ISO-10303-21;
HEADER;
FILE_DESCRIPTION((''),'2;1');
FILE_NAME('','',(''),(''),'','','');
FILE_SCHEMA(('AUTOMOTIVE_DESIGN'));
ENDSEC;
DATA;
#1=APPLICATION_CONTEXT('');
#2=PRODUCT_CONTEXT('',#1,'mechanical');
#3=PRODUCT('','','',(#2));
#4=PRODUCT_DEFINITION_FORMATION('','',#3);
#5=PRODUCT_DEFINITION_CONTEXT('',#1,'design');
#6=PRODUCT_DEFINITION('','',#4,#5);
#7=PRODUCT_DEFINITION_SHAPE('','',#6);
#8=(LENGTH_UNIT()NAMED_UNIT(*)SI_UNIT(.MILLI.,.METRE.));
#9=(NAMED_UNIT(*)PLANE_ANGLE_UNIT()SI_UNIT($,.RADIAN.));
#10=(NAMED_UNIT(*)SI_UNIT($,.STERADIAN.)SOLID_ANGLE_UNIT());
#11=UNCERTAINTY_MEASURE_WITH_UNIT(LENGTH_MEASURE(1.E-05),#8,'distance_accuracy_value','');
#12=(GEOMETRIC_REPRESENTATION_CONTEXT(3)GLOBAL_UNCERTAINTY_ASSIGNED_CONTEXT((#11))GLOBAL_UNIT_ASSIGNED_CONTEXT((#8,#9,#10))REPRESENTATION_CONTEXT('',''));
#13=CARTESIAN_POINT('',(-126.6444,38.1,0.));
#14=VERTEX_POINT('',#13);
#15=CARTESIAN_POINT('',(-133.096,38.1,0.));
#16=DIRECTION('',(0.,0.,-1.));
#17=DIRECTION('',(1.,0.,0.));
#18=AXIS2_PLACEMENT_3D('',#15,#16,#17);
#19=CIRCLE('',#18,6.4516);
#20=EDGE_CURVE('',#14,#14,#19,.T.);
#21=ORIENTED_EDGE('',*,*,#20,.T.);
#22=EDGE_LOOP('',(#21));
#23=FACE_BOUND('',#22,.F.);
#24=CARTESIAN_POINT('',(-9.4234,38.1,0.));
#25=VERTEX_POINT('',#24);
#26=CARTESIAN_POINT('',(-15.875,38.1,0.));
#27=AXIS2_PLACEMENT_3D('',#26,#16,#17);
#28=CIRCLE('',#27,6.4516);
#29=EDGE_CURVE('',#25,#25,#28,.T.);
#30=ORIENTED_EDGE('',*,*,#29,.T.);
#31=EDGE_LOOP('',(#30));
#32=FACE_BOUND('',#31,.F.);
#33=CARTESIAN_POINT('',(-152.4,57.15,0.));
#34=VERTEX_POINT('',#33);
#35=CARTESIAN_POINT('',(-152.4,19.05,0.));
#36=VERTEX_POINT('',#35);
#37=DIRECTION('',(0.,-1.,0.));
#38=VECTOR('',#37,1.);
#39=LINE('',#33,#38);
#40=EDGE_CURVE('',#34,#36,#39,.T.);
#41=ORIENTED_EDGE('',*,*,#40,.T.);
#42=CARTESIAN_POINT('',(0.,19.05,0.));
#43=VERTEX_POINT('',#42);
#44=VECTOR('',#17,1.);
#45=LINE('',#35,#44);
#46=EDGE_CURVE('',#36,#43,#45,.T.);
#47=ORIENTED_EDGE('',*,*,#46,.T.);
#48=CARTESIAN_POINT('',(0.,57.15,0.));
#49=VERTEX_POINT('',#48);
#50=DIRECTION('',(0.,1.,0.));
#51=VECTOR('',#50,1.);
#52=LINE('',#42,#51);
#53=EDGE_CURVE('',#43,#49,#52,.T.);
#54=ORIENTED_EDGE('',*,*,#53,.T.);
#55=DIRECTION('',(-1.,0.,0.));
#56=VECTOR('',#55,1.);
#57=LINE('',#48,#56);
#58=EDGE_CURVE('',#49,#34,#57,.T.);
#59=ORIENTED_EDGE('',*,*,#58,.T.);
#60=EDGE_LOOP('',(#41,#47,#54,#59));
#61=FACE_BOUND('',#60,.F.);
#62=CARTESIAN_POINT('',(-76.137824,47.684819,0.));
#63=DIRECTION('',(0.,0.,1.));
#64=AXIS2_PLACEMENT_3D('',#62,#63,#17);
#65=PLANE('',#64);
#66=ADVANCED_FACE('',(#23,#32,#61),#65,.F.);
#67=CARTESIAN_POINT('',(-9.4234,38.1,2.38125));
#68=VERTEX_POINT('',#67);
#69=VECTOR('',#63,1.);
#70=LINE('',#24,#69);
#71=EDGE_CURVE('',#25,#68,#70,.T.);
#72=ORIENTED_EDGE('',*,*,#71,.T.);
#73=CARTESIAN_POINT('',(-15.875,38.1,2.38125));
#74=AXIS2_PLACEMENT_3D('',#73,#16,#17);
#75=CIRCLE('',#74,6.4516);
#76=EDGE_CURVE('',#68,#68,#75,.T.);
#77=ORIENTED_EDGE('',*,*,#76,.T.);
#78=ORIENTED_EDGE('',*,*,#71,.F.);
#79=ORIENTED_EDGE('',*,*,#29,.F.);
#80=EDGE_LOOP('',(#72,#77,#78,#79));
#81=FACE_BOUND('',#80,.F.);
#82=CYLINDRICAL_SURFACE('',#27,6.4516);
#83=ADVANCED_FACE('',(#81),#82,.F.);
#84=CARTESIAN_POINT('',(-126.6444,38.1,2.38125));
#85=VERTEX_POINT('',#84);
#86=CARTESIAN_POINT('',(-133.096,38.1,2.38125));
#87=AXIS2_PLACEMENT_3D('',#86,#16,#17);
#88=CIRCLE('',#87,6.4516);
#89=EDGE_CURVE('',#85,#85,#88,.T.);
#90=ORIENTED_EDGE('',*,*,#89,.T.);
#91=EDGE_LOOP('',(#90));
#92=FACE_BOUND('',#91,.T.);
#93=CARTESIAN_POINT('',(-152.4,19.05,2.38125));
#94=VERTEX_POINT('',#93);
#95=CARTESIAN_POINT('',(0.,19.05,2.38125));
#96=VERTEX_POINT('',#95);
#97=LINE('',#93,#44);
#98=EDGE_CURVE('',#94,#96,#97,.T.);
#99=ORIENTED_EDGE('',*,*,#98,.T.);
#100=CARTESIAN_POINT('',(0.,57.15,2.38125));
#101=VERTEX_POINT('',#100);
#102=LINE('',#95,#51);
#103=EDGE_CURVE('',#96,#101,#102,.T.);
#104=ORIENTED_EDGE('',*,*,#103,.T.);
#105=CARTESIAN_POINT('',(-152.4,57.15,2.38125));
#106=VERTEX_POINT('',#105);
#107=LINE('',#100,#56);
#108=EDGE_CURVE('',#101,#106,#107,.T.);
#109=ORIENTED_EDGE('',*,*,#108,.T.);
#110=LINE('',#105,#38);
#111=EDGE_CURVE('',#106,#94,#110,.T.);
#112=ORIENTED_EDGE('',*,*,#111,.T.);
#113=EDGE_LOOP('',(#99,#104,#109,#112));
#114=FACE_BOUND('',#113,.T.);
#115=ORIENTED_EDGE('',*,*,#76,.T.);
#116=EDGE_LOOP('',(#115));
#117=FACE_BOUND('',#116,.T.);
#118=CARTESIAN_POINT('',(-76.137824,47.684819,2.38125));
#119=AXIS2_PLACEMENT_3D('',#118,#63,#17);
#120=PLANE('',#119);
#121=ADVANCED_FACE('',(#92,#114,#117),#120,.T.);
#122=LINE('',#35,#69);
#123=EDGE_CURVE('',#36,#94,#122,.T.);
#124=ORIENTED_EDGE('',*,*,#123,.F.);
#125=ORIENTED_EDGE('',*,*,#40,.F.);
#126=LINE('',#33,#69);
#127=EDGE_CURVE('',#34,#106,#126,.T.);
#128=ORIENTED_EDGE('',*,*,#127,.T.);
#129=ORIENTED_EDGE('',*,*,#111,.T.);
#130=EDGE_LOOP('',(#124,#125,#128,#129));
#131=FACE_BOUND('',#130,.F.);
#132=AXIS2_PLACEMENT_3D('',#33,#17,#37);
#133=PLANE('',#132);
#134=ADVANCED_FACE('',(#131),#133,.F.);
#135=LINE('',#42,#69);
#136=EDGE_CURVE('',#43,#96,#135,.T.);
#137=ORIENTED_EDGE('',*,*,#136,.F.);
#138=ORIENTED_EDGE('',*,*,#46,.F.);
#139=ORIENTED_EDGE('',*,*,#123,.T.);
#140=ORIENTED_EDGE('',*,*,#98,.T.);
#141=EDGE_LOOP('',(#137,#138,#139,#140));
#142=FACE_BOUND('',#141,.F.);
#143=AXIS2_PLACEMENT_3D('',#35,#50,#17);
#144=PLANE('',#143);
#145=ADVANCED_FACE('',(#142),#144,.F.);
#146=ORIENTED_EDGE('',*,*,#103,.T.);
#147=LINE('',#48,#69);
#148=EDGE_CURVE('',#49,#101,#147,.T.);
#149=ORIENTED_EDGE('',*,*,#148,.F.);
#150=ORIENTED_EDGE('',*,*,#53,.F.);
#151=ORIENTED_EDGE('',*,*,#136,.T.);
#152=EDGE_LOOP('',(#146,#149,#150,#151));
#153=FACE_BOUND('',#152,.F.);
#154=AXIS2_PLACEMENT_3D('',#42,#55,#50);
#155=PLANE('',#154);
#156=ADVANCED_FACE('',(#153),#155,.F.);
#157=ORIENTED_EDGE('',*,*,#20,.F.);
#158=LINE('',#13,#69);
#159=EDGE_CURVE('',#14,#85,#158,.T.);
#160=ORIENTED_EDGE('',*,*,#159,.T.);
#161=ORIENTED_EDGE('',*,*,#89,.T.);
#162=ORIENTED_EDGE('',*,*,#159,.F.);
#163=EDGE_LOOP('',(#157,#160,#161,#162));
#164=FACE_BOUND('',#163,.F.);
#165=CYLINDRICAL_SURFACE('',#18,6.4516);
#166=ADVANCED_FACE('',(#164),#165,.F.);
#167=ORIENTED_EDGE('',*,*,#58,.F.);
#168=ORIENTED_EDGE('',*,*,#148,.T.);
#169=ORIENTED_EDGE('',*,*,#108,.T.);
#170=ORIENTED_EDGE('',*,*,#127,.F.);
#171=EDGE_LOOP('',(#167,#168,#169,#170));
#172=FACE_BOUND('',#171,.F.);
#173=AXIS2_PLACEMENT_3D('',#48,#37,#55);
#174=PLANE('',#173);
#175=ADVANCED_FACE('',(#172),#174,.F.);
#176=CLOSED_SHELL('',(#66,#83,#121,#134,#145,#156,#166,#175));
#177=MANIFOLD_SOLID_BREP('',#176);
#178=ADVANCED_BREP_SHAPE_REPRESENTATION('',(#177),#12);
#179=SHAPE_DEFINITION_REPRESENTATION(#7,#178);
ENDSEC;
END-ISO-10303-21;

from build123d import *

# Parameters (mm, degrees)
F1_DEPTH = 2.38125


# Not quite as in the source:
# - a feature names something its author has since deleted; it is built from what else it names


with BuildPart() as f1:
    # F0 (on Top) → F1 (new body)
    with BuildSketch(Plane.XY):
        with BuildLine():
            Line((-9.4234, 38.1), (0, 38.1))
            Line((0, 38.1), (0, 57.15))
            Line((0, 57.15), (-152.4, 57.15))
            Line((-152.4, 57.15), (-152.4, 38.1))
            Line((-152.4, 38.1), (-139.5476, 38.1))
            ThreePointArc((-139.5476, 38.1), (-133.096, 44.5516), (-126.6444, 38.1))
            Line((-126.6444, 38.1), (-22.3266, 38.1))
            ThreePointArc((-22.3266, 38.1), (-15.875, 44.5516), (-9.4234, 38.1))
        make_face()
        with BuildLine():
            Line((-152.4, 19.05), (0, 19.05))
            Line((0, 19.05), (0, 38.1))
            Line((0, 38.1), (-9.4234, 38.1))
            ThreePointArc((-9.4234, 38.1), (-15.875, 31.6484), (-22.3266, 38.1))
            Line((-22.3266, 38.1), (-126.6444, 38.1))
            ThreePointArc((-126.6444, 38.1), (-133.096, 31.6484), (-139.5476, 38.1))
            Line((-139.5476, 38.1), (-152.4, 38.1))
            Line((-152.4, 38.1), (-152.4, 19.05))
        make_face()
    extrude(amount=F1_DEPTH)


solid = f1.part
